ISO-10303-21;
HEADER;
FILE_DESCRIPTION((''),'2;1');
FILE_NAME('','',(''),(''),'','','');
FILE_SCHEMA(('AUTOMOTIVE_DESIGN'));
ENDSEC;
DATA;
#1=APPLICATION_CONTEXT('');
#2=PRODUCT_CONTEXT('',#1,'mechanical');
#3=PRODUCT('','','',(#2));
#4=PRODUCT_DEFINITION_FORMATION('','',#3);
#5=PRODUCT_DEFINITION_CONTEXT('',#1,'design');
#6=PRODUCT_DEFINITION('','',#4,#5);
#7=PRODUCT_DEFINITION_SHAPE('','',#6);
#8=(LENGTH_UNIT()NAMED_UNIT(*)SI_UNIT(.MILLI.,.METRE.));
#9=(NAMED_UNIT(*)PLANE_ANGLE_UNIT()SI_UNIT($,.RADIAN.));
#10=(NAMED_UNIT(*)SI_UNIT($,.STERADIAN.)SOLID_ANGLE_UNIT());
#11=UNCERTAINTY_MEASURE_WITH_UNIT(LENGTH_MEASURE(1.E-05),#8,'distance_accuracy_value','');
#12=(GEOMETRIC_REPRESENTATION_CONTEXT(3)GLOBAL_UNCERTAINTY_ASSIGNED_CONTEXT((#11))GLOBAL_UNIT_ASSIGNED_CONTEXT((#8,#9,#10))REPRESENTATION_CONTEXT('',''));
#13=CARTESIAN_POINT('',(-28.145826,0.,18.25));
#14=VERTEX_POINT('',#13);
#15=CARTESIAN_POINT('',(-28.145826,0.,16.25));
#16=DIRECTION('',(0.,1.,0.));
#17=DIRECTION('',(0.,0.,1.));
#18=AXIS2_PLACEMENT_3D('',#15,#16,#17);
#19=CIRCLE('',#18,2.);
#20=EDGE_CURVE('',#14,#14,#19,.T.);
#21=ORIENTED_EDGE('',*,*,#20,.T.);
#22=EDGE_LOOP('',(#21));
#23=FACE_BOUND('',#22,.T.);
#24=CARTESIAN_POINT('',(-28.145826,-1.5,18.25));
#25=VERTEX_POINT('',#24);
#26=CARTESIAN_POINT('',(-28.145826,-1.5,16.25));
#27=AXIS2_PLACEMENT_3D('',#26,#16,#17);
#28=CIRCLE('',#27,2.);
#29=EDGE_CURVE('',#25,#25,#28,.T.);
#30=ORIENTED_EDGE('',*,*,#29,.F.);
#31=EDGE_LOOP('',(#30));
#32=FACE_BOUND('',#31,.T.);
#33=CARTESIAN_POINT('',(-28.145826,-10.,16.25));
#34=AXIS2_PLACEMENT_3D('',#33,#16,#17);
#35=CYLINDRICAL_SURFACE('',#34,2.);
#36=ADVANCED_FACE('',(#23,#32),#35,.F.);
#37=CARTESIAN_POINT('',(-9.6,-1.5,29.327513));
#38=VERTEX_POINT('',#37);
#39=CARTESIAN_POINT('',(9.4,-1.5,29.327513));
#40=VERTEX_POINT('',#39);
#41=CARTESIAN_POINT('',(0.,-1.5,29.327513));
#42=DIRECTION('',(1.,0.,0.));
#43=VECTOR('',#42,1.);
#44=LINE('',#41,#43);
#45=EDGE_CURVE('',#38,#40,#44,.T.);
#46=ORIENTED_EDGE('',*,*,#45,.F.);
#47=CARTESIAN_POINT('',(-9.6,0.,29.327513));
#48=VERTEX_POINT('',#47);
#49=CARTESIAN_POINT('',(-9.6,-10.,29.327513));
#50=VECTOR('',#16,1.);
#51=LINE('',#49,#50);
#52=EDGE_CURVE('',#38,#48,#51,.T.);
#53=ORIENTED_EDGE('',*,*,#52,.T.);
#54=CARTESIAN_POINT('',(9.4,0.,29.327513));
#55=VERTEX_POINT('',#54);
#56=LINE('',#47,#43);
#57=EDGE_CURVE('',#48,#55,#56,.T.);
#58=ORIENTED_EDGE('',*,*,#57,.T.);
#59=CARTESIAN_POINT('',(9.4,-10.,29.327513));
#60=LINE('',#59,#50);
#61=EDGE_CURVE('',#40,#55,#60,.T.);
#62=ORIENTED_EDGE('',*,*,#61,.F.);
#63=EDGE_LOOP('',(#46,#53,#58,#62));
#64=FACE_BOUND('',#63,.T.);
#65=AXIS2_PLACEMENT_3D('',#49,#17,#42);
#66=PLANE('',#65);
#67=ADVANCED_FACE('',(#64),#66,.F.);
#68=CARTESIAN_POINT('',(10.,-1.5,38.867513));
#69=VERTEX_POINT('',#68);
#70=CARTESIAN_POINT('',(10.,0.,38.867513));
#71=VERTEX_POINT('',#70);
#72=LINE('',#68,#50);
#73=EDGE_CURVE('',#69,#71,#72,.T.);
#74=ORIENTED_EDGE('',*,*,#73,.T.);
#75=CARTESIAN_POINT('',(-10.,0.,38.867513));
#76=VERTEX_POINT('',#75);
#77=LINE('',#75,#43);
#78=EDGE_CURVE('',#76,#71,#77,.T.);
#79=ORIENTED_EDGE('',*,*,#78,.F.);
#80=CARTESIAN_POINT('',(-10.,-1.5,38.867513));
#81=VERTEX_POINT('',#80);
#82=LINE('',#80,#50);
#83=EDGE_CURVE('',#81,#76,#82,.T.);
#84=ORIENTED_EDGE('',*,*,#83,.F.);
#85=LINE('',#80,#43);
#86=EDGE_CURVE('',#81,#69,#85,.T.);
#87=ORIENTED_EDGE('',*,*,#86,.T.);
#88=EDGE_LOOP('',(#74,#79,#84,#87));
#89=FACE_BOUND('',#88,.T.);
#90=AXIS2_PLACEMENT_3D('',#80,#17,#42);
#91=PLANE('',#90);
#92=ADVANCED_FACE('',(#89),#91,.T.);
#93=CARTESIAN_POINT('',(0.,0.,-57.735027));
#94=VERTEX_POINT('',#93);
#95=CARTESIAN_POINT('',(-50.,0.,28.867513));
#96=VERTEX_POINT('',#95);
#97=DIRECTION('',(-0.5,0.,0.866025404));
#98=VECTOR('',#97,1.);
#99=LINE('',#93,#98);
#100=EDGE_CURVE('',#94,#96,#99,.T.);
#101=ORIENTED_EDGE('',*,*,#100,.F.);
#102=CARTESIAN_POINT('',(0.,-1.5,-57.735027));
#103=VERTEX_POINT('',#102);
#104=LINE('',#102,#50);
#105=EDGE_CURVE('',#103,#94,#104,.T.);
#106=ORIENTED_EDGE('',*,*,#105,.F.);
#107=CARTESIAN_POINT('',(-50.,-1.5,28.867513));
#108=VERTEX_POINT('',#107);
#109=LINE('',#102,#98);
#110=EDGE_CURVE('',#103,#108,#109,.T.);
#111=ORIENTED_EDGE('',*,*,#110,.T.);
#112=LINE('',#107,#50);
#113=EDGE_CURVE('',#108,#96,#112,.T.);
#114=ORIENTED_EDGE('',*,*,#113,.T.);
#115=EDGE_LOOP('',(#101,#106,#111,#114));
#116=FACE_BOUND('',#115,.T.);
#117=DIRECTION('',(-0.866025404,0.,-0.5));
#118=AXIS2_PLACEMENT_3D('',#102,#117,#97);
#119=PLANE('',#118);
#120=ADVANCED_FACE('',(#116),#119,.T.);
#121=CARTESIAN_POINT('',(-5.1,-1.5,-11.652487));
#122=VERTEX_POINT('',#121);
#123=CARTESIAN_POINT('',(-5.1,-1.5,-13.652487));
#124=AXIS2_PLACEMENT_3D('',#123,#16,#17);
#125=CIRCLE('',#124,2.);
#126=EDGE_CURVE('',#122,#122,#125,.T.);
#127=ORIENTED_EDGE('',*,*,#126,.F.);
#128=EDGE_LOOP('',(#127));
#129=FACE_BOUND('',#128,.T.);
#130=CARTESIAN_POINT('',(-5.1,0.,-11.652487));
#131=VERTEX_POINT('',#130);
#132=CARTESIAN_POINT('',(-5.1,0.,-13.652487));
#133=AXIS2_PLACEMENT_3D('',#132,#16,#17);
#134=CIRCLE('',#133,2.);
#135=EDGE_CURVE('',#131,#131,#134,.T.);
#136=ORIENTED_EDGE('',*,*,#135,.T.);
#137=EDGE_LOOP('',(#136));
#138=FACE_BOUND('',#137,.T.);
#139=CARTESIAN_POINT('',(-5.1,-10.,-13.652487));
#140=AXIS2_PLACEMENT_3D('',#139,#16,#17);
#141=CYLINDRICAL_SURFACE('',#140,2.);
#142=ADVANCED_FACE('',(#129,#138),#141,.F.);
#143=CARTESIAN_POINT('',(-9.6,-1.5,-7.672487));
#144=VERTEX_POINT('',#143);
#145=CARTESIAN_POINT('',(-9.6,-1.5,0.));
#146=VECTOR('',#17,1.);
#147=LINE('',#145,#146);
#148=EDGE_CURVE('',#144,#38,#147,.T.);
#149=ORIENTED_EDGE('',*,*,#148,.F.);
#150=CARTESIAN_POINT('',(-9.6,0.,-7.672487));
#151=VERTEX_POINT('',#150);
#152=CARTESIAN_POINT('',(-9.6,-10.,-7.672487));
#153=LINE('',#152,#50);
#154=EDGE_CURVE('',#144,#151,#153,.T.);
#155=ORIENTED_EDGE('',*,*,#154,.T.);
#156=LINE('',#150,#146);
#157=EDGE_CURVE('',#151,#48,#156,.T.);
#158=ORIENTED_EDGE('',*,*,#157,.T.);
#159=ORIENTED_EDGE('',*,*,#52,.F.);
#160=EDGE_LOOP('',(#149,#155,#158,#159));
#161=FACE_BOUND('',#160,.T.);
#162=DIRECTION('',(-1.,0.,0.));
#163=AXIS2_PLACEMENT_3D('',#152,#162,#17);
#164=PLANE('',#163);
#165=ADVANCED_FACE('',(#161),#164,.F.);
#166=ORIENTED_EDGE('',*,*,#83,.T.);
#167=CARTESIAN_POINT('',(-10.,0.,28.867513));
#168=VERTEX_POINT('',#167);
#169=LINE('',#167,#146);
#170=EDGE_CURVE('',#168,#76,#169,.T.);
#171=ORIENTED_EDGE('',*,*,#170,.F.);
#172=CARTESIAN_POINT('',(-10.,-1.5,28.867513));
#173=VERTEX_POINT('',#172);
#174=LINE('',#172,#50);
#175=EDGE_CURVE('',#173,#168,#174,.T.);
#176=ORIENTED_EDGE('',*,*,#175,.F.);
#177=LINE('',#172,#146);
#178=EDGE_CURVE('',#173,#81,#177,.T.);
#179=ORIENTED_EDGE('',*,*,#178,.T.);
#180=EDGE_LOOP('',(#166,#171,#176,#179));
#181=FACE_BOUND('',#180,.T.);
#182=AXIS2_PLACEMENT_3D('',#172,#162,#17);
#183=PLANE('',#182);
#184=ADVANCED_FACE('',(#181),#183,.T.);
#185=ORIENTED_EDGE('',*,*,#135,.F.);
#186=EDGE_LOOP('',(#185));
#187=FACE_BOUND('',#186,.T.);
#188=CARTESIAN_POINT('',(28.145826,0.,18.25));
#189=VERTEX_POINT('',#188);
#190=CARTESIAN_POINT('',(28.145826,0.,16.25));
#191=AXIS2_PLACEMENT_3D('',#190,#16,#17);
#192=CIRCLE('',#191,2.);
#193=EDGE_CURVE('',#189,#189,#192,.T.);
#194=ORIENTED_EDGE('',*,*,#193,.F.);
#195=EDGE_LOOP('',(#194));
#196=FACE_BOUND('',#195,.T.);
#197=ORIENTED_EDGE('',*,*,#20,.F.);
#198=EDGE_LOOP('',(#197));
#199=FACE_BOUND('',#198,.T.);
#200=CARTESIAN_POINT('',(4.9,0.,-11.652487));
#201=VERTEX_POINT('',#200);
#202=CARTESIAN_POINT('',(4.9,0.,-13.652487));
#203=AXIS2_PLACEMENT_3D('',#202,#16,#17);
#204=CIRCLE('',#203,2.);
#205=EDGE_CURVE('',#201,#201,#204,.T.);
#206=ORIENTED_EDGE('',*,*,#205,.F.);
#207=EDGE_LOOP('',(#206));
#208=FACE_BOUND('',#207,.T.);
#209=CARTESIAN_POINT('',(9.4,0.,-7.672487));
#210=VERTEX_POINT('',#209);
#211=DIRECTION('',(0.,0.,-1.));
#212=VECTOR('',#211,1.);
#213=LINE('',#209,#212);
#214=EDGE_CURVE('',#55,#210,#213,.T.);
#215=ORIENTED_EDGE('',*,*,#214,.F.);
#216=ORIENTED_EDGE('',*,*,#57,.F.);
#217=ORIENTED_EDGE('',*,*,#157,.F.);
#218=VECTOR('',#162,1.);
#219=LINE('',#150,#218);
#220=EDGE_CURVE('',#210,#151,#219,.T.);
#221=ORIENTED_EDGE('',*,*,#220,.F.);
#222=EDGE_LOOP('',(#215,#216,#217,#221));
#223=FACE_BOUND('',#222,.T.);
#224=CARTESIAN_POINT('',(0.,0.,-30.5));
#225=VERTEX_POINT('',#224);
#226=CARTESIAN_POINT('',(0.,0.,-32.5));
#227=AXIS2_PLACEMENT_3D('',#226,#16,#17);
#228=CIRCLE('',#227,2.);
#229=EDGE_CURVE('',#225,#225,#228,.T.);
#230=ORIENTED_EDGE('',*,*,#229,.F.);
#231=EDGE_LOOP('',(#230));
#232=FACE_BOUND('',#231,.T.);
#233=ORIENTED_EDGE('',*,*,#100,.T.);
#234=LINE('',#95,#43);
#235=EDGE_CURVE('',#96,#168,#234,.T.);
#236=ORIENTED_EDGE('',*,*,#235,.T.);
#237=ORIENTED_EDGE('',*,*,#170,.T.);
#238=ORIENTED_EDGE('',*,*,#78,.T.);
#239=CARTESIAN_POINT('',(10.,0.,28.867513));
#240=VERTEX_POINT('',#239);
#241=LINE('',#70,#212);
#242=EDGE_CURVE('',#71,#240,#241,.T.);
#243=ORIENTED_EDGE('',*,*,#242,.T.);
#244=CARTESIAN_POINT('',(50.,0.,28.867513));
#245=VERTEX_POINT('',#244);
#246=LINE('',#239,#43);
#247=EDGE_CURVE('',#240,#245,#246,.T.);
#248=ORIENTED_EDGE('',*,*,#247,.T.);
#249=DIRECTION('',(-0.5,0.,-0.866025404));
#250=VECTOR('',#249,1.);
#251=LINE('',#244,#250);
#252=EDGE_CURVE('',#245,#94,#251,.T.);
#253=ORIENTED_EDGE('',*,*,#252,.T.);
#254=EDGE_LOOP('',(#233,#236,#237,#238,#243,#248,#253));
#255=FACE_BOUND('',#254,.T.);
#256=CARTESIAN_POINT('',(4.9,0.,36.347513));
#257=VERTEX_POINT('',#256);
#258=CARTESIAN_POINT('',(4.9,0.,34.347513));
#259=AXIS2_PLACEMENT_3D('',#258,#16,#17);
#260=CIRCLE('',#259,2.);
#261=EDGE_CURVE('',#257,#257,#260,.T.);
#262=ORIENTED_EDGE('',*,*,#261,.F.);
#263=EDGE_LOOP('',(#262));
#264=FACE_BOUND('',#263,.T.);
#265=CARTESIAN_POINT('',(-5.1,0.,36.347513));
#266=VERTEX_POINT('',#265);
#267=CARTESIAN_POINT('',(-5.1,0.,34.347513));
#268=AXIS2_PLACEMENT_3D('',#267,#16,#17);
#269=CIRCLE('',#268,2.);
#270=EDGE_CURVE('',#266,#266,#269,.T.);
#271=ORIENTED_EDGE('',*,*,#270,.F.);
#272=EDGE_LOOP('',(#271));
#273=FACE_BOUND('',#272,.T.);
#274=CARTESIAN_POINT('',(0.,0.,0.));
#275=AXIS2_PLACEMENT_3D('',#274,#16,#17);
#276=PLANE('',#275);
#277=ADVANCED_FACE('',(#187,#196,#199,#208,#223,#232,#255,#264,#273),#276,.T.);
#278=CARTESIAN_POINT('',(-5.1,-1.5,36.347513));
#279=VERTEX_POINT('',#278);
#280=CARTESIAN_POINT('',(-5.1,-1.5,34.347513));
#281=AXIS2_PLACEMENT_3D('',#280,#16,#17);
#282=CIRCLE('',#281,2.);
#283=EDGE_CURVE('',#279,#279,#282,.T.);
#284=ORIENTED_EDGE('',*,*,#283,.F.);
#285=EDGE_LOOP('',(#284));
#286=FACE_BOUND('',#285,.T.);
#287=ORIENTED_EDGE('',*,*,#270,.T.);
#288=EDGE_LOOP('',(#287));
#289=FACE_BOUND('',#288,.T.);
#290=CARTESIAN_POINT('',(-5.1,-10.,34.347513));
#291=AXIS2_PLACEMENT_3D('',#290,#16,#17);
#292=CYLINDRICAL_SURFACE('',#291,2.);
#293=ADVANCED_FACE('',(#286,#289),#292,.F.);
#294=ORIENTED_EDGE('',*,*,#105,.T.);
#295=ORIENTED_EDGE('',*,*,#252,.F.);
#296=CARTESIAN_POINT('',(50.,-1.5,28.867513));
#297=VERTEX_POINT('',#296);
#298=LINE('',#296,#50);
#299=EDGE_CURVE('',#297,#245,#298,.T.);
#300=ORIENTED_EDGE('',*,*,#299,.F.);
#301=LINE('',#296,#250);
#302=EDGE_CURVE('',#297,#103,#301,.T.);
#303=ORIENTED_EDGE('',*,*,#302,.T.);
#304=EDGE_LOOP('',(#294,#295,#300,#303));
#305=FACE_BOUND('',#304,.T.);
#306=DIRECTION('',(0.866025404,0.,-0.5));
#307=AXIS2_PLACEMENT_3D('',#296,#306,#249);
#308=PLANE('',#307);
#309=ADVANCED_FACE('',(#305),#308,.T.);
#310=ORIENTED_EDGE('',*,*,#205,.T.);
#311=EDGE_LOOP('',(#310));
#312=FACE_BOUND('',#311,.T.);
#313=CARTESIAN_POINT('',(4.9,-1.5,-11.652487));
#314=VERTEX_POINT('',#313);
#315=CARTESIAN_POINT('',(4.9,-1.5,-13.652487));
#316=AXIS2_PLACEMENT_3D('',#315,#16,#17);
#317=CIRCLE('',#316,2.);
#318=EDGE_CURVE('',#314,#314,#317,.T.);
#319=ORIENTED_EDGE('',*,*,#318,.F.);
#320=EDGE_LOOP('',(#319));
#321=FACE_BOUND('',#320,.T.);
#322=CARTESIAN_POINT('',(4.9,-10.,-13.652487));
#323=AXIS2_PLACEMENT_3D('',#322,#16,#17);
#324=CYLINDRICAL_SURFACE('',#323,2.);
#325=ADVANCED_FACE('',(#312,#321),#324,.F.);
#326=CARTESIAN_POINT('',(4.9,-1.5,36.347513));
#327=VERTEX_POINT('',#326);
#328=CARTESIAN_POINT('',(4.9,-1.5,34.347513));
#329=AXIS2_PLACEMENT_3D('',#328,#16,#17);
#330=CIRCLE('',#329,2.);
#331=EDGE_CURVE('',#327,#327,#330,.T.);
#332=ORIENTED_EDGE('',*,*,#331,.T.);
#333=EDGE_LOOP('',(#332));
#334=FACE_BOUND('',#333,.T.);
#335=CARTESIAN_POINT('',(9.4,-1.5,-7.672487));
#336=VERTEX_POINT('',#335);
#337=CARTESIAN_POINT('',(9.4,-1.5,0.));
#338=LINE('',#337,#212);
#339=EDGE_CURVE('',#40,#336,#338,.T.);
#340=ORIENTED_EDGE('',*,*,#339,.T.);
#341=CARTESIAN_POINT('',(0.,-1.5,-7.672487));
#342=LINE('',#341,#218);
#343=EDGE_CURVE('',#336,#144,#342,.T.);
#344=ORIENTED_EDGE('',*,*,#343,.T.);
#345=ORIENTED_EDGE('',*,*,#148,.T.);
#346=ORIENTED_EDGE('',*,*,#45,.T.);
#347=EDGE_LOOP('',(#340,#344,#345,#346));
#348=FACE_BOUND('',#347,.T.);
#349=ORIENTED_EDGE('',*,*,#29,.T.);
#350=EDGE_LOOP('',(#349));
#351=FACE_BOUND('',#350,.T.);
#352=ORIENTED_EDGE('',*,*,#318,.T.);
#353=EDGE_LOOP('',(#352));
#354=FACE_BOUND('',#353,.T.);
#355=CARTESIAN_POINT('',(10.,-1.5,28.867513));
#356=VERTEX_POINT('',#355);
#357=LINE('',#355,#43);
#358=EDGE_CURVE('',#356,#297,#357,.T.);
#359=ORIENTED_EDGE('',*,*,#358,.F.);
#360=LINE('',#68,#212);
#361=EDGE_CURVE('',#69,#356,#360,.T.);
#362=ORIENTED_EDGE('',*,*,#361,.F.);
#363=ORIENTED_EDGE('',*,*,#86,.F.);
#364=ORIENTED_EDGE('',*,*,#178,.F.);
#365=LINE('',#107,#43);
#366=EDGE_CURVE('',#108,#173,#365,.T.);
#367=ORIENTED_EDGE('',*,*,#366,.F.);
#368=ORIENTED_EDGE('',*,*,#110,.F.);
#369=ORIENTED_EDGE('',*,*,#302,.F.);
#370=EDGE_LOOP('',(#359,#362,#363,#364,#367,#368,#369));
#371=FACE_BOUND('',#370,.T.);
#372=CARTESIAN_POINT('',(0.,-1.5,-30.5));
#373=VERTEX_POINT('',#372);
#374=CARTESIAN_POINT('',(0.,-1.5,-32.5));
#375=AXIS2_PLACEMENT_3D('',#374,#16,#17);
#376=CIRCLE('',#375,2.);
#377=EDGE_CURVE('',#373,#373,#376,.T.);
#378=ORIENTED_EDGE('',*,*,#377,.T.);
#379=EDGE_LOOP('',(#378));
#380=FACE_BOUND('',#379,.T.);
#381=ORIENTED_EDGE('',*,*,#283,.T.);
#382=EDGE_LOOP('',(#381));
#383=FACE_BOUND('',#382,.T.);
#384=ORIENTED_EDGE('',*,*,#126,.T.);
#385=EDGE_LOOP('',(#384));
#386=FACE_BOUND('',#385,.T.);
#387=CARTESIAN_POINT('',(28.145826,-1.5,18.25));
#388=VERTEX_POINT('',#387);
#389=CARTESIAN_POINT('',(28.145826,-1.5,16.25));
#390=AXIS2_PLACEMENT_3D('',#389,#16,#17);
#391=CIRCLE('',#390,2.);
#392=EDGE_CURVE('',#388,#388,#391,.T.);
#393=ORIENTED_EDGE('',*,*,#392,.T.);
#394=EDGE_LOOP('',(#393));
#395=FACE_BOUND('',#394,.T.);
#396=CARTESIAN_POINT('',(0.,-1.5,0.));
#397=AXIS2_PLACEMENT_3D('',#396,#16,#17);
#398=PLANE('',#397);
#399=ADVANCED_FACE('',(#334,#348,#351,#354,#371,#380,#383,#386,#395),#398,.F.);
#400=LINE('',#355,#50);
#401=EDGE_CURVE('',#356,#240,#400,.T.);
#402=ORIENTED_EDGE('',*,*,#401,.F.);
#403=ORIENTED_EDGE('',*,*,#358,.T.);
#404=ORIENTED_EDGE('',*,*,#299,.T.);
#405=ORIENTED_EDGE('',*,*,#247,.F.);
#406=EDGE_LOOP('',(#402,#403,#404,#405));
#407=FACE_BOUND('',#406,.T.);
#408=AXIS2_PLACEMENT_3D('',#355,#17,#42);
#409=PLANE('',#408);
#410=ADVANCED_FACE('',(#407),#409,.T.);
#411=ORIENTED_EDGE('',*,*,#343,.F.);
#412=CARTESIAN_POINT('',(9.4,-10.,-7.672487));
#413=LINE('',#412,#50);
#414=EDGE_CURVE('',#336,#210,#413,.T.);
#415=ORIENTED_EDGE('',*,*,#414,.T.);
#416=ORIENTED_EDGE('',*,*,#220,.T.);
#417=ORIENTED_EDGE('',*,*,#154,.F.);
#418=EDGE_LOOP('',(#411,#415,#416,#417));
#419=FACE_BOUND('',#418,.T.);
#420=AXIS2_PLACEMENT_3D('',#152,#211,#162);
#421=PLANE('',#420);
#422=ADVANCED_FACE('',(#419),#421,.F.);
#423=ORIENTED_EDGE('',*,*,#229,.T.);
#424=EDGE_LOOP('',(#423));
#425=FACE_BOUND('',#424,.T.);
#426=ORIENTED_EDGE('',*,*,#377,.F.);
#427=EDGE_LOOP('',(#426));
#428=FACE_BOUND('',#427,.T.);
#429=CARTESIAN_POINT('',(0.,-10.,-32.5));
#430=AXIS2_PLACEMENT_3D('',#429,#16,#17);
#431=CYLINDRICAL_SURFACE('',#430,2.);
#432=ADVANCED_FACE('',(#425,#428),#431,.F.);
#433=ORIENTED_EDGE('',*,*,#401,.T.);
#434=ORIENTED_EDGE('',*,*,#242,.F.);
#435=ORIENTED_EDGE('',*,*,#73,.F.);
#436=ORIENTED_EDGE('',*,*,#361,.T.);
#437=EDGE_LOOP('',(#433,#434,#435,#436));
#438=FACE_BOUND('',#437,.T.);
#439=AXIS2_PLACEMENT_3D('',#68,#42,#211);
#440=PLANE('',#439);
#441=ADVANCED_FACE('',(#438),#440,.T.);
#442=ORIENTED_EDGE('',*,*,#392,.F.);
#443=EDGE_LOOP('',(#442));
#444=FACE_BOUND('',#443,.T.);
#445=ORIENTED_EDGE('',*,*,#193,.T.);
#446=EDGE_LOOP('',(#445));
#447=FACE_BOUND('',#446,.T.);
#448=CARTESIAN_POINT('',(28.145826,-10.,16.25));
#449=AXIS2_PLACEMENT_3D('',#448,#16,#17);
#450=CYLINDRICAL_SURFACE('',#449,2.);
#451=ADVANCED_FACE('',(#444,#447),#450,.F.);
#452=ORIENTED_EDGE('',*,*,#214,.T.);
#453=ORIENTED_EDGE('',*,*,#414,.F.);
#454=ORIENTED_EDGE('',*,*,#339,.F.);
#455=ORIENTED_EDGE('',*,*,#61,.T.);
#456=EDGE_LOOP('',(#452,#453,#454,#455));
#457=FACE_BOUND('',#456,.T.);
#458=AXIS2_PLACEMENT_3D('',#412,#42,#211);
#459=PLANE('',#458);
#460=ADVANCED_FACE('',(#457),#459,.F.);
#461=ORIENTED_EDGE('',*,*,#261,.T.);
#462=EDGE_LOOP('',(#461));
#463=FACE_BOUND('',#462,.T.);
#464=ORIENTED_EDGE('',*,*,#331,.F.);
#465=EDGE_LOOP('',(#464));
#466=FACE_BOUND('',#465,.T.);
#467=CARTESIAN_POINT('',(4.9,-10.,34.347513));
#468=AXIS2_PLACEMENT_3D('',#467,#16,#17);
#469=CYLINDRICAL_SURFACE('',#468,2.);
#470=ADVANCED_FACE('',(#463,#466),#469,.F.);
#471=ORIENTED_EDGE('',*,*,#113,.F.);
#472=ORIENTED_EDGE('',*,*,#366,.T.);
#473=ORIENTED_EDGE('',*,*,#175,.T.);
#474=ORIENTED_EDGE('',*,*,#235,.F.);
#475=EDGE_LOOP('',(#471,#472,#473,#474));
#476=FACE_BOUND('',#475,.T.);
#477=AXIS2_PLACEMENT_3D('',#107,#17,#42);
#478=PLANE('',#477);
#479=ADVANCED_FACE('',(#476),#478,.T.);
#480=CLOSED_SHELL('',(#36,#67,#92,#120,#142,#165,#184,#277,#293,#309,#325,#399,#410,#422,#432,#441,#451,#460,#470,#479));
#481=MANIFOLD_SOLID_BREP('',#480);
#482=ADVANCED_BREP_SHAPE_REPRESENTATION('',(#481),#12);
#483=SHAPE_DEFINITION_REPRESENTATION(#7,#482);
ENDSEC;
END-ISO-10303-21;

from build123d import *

# Parameters (mm, degrees)
BASE_FLANGE1_DEPTH = 1.5
SKETCH6_R          = 2
CUT_EXTRUDE1_DEPTH = 10
SKETCH7_R          = 2
SKETCH7_W          = 19
SKETCH7_H          = 37
CUT_EXTRUDE2_DEPTH = 10


# Sheet-metal steps are written as plain solids
with BuildPart() as part:
    # Sketch1 → Base-Flange1 (new body)
    with BuildSketch(Plane(origin=(0, 0, 0), x_dir=(1, 0, 0), z_dir=(0, 1, 0))):
        Polygon((0, 57.735026919), (-50, -28.867513459), (-10, -28.867513459), (-10, -38.867513459), (10, -38.867513459), (10, -28.867513459), (50, -28.867513459), align=None)
    extrude(amount=-BASE_FLANGE1_DEPTH)

    # Sketch6 → Cut-Extrude1 (cut)
    with BuildSketch(Plane(origin=(0, 0, 0), x_dir=(1, 0, 0), z_dir=(0, 1, 0))):
        with Locations(Location((0, 32.5, 0), (0, 0, 270))):
            Circle(SKETCH6_R)
        with Locations(Location((28.145825623, -16.25, 0), (0, 0, 270))):
            Circle(SKETCH6_R)
        with Locations(Location((-28.145825623, -16.25, 0), (0, 0, 270))):
            Circle(SKETCH6_R)
    extrude(amount=-CUT_EXTRUDE1_DEPTH, mode=Mode.SUBTRACT)

    # Sketch7 → Cut-Extrude2 (cut)
    with BuildSketch(Plane(origin=(0, 0, 0), x_dir=(1, 0, 0), z_dir=(0, 1, 0))):
        with Locations(Location((-5.1, -34.347513459, 0), (0, 0, 270))):
            Circle(SKETCH7_R)
        with Locations(Location((4.9, -34.347513459, 0), (0, 0, 270))):
            Circle(SKETCH7_R)
        with Locations(Location((-5.1, 13.652486541, 0), (0, 0, 270))):
            Circle(SKETCH7_R)
        with Locations(Location((4.9, 13.652486541, 0), (0, 0, 270))):
            Circle(SKETCH7_R)
        with Locations((-0.1, -10.827513459)):
            Rectangle(SKETCH7_W, SKETCH7_H)
    extrude(amount=-CUT_EXTRUDE2_DEPTH, mode=Mode.SUBTRACT)


solid = part.part
